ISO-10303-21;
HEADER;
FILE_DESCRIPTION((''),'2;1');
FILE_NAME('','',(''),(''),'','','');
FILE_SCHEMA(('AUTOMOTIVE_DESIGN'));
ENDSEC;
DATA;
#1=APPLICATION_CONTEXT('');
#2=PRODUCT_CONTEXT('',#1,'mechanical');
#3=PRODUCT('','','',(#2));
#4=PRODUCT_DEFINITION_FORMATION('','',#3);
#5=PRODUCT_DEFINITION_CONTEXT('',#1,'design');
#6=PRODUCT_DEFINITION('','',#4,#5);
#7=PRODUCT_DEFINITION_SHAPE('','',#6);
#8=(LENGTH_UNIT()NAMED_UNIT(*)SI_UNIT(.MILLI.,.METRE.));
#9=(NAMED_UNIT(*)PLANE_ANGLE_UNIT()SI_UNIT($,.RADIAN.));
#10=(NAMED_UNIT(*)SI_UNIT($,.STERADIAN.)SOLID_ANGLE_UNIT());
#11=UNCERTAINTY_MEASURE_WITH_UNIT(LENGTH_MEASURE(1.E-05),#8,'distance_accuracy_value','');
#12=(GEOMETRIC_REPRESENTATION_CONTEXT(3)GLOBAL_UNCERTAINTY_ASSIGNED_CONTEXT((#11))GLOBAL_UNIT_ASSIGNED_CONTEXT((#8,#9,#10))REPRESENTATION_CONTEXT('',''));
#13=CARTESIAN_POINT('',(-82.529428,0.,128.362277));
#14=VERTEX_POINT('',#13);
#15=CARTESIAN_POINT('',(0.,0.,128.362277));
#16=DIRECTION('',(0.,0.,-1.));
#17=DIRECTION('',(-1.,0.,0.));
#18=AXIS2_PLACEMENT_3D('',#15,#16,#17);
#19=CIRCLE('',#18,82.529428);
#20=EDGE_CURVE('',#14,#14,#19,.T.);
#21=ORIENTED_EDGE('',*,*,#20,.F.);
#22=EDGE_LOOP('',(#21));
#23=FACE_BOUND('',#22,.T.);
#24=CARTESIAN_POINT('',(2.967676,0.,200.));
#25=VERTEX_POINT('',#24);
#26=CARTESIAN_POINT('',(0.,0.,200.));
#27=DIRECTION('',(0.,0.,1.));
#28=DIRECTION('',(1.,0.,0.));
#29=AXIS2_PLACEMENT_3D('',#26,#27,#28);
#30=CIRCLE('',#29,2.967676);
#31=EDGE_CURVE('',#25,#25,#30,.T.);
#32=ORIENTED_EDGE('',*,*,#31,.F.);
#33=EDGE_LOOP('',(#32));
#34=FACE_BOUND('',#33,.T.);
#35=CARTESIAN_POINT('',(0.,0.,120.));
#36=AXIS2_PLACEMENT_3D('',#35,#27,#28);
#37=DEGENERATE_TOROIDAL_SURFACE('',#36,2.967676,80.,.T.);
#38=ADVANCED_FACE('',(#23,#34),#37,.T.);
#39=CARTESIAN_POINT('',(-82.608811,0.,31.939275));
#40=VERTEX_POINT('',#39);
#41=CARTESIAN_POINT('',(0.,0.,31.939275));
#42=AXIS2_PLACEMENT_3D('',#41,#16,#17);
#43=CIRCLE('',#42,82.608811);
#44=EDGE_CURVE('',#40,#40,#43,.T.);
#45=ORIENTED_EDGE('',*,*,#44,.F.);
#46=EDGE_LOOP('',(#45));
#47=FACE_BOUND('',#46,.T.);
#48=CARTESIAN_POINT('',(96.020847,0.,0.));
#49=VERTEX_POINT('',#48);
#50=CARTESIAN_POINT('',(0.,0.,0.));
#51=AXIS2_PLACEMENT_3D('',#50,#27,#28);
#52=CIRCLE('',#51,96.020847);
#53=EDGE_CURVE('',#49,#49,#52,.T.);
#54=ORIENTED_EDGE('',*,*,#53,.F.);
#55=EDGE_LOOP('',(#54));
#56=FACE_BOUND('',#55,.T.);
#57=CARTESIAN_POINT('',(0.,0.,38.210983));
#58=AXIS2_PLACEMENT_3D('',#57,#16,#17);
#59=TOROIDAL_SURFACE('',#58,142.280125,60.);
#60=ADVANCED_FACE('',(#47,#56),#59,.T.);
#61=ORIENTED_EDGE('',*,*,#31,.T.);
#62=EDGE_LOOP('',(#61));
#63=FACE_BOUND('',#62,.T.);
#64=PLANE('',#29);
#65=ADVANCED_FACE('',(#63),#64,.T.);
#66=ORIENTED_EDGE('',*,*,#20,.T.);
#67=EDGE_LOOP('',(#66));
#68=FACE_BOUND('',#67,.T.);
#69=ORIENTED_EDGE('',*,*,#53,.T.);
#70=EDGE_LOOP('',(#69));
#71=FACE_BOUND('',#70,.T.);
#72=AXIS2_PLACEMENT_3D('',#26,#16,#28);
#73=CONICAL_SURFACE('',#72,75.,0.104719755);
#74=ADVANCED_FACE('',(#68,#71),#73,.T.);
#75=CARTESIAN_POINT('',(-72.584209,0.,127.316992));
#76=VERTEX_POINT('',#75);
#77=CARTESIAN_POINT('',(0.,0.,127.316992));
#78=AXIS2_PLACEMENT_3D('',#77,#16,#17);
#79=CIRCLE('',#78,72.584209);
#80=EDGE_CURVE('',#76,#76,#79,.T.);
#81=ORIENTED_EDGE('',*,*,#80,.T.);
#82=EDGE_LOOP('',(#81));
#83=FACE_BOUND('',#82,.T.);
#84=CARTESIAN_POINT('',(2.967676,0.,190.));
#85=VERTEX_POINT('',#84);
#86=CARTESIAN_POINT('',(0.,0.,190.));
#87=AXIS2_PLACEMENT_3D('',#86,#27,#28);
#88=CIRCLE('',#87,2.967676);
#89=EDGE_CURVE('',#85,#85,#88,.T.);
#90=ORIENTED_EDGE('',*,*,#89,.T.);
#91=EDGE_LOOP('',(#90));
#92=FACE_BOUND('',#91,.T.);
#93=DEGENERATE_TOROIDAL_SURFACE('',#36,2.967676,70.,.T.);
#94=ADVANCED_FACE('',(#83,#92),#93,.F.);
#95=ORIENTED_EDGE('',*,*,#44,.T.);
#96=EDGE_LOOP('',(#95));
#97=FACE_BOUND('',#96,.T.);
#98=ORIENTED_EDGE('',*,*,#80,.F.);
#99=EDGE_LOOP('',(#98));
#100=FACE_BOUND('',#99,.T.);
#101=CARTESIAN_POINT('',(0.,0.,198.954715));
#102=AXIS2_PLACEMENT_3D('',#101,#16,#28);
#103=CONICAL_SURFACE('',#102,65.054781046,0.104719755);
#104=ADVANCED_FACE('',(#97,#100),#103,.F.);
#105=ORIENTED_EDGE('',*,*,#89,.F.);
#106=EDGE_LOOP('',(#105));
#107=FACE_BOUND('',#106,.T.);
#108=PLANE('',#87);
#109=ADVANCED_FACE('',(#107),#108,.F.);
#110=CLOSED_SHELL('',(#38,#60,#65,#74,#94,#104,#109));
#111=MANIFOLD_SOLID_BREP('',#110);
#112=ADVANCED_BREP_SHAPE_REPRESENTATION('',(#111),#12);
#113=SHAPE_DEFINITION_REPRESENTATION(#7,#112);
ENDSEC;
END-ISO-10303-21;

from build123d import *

# Parameters (mm, degrees)
SKETCH1_R           = 75.00000000000001
BOSS_EXTRUDE1_DEPTH = 200.00000000000003
DRAFT1_ANGLE        = 6.000000000000013
FILLET1_R           = 80
SHELL1_T            = -10
FILLET2_R           = 60


with BuildPart() as part:
    # Sketch1 → Boss-Extrude1 (new body)
    with BuildSketch(Plane.XY):
        Circle(SKETCH1_R)
    extrude(amount=BOSS_EXTRUDE1_DEPTH)

    # Draft1
    draft1_faces = [part.faces().sort_by_distance(p)[0] for p in [
        (-75.00000000000001, 9.18e-15, 100.00000000000001),
    ]]
    draft(draft1_faces, Plane.XY.offset(200.00000000000003), DRAFT1_ANGLE)

    # Fillet1
    fillet1_edges = [part.edges().sort_by_distance(p)[0] for p in [
        (-75.00000000000003, 9.18e-15, 200.00000000000003),
    ]]
    fillet(fillet1_edges, radius=FILLET1_R)

    # Shell1
    shell1_openings = [part.faces().sort_by_distance(p)[0] for p in [
        (0, 0, 0),
    ]]
    offset(amount=SHELL1_T, openings=shell1_openings, kind=Kind.INTERSECTION)

    # Fillet2
    # the kernel refuses this fillet: 60 mm, written as the material it takes off along each edge
    with BuildSketch(Plane(origin=(0, 0, 0), x_dir=(1, 0, 0), z_dir=(0, 1, 0))) as fillet2_piece_1:
        with BuildLine():
            CenterArc((142.2801248958351, -38.210982890692364), FILLET2_R, 140.44269023806876, 33.557309761931236)
            Line((82.60881117373867, -31.939275094633143), (81.41538489929674, -31.81384093871196))
            Line((81.41538489929674, -31.81384093871196), (84.77233798305825, 0.12543415592118445))
            Line((84.77233798305825, 0.12543415592118445), (85.96576425750018, 1.2000000000000002))
            ThreePointArc((85.96576425750018, 1.2000000000000002), (90.99330565532057, 1.2000000000000002), (95.0956614962871, 0.7642196578091147))
            Line((95.0956614962871, 0.7642196578091147), (96.02084705314097, -4.63984e-12))
        make_face()
    revolve(axis=Axis((0, 0, 0), (0, 0, -1)), mode=Mode.SUBTRACT)


solid = part.part
